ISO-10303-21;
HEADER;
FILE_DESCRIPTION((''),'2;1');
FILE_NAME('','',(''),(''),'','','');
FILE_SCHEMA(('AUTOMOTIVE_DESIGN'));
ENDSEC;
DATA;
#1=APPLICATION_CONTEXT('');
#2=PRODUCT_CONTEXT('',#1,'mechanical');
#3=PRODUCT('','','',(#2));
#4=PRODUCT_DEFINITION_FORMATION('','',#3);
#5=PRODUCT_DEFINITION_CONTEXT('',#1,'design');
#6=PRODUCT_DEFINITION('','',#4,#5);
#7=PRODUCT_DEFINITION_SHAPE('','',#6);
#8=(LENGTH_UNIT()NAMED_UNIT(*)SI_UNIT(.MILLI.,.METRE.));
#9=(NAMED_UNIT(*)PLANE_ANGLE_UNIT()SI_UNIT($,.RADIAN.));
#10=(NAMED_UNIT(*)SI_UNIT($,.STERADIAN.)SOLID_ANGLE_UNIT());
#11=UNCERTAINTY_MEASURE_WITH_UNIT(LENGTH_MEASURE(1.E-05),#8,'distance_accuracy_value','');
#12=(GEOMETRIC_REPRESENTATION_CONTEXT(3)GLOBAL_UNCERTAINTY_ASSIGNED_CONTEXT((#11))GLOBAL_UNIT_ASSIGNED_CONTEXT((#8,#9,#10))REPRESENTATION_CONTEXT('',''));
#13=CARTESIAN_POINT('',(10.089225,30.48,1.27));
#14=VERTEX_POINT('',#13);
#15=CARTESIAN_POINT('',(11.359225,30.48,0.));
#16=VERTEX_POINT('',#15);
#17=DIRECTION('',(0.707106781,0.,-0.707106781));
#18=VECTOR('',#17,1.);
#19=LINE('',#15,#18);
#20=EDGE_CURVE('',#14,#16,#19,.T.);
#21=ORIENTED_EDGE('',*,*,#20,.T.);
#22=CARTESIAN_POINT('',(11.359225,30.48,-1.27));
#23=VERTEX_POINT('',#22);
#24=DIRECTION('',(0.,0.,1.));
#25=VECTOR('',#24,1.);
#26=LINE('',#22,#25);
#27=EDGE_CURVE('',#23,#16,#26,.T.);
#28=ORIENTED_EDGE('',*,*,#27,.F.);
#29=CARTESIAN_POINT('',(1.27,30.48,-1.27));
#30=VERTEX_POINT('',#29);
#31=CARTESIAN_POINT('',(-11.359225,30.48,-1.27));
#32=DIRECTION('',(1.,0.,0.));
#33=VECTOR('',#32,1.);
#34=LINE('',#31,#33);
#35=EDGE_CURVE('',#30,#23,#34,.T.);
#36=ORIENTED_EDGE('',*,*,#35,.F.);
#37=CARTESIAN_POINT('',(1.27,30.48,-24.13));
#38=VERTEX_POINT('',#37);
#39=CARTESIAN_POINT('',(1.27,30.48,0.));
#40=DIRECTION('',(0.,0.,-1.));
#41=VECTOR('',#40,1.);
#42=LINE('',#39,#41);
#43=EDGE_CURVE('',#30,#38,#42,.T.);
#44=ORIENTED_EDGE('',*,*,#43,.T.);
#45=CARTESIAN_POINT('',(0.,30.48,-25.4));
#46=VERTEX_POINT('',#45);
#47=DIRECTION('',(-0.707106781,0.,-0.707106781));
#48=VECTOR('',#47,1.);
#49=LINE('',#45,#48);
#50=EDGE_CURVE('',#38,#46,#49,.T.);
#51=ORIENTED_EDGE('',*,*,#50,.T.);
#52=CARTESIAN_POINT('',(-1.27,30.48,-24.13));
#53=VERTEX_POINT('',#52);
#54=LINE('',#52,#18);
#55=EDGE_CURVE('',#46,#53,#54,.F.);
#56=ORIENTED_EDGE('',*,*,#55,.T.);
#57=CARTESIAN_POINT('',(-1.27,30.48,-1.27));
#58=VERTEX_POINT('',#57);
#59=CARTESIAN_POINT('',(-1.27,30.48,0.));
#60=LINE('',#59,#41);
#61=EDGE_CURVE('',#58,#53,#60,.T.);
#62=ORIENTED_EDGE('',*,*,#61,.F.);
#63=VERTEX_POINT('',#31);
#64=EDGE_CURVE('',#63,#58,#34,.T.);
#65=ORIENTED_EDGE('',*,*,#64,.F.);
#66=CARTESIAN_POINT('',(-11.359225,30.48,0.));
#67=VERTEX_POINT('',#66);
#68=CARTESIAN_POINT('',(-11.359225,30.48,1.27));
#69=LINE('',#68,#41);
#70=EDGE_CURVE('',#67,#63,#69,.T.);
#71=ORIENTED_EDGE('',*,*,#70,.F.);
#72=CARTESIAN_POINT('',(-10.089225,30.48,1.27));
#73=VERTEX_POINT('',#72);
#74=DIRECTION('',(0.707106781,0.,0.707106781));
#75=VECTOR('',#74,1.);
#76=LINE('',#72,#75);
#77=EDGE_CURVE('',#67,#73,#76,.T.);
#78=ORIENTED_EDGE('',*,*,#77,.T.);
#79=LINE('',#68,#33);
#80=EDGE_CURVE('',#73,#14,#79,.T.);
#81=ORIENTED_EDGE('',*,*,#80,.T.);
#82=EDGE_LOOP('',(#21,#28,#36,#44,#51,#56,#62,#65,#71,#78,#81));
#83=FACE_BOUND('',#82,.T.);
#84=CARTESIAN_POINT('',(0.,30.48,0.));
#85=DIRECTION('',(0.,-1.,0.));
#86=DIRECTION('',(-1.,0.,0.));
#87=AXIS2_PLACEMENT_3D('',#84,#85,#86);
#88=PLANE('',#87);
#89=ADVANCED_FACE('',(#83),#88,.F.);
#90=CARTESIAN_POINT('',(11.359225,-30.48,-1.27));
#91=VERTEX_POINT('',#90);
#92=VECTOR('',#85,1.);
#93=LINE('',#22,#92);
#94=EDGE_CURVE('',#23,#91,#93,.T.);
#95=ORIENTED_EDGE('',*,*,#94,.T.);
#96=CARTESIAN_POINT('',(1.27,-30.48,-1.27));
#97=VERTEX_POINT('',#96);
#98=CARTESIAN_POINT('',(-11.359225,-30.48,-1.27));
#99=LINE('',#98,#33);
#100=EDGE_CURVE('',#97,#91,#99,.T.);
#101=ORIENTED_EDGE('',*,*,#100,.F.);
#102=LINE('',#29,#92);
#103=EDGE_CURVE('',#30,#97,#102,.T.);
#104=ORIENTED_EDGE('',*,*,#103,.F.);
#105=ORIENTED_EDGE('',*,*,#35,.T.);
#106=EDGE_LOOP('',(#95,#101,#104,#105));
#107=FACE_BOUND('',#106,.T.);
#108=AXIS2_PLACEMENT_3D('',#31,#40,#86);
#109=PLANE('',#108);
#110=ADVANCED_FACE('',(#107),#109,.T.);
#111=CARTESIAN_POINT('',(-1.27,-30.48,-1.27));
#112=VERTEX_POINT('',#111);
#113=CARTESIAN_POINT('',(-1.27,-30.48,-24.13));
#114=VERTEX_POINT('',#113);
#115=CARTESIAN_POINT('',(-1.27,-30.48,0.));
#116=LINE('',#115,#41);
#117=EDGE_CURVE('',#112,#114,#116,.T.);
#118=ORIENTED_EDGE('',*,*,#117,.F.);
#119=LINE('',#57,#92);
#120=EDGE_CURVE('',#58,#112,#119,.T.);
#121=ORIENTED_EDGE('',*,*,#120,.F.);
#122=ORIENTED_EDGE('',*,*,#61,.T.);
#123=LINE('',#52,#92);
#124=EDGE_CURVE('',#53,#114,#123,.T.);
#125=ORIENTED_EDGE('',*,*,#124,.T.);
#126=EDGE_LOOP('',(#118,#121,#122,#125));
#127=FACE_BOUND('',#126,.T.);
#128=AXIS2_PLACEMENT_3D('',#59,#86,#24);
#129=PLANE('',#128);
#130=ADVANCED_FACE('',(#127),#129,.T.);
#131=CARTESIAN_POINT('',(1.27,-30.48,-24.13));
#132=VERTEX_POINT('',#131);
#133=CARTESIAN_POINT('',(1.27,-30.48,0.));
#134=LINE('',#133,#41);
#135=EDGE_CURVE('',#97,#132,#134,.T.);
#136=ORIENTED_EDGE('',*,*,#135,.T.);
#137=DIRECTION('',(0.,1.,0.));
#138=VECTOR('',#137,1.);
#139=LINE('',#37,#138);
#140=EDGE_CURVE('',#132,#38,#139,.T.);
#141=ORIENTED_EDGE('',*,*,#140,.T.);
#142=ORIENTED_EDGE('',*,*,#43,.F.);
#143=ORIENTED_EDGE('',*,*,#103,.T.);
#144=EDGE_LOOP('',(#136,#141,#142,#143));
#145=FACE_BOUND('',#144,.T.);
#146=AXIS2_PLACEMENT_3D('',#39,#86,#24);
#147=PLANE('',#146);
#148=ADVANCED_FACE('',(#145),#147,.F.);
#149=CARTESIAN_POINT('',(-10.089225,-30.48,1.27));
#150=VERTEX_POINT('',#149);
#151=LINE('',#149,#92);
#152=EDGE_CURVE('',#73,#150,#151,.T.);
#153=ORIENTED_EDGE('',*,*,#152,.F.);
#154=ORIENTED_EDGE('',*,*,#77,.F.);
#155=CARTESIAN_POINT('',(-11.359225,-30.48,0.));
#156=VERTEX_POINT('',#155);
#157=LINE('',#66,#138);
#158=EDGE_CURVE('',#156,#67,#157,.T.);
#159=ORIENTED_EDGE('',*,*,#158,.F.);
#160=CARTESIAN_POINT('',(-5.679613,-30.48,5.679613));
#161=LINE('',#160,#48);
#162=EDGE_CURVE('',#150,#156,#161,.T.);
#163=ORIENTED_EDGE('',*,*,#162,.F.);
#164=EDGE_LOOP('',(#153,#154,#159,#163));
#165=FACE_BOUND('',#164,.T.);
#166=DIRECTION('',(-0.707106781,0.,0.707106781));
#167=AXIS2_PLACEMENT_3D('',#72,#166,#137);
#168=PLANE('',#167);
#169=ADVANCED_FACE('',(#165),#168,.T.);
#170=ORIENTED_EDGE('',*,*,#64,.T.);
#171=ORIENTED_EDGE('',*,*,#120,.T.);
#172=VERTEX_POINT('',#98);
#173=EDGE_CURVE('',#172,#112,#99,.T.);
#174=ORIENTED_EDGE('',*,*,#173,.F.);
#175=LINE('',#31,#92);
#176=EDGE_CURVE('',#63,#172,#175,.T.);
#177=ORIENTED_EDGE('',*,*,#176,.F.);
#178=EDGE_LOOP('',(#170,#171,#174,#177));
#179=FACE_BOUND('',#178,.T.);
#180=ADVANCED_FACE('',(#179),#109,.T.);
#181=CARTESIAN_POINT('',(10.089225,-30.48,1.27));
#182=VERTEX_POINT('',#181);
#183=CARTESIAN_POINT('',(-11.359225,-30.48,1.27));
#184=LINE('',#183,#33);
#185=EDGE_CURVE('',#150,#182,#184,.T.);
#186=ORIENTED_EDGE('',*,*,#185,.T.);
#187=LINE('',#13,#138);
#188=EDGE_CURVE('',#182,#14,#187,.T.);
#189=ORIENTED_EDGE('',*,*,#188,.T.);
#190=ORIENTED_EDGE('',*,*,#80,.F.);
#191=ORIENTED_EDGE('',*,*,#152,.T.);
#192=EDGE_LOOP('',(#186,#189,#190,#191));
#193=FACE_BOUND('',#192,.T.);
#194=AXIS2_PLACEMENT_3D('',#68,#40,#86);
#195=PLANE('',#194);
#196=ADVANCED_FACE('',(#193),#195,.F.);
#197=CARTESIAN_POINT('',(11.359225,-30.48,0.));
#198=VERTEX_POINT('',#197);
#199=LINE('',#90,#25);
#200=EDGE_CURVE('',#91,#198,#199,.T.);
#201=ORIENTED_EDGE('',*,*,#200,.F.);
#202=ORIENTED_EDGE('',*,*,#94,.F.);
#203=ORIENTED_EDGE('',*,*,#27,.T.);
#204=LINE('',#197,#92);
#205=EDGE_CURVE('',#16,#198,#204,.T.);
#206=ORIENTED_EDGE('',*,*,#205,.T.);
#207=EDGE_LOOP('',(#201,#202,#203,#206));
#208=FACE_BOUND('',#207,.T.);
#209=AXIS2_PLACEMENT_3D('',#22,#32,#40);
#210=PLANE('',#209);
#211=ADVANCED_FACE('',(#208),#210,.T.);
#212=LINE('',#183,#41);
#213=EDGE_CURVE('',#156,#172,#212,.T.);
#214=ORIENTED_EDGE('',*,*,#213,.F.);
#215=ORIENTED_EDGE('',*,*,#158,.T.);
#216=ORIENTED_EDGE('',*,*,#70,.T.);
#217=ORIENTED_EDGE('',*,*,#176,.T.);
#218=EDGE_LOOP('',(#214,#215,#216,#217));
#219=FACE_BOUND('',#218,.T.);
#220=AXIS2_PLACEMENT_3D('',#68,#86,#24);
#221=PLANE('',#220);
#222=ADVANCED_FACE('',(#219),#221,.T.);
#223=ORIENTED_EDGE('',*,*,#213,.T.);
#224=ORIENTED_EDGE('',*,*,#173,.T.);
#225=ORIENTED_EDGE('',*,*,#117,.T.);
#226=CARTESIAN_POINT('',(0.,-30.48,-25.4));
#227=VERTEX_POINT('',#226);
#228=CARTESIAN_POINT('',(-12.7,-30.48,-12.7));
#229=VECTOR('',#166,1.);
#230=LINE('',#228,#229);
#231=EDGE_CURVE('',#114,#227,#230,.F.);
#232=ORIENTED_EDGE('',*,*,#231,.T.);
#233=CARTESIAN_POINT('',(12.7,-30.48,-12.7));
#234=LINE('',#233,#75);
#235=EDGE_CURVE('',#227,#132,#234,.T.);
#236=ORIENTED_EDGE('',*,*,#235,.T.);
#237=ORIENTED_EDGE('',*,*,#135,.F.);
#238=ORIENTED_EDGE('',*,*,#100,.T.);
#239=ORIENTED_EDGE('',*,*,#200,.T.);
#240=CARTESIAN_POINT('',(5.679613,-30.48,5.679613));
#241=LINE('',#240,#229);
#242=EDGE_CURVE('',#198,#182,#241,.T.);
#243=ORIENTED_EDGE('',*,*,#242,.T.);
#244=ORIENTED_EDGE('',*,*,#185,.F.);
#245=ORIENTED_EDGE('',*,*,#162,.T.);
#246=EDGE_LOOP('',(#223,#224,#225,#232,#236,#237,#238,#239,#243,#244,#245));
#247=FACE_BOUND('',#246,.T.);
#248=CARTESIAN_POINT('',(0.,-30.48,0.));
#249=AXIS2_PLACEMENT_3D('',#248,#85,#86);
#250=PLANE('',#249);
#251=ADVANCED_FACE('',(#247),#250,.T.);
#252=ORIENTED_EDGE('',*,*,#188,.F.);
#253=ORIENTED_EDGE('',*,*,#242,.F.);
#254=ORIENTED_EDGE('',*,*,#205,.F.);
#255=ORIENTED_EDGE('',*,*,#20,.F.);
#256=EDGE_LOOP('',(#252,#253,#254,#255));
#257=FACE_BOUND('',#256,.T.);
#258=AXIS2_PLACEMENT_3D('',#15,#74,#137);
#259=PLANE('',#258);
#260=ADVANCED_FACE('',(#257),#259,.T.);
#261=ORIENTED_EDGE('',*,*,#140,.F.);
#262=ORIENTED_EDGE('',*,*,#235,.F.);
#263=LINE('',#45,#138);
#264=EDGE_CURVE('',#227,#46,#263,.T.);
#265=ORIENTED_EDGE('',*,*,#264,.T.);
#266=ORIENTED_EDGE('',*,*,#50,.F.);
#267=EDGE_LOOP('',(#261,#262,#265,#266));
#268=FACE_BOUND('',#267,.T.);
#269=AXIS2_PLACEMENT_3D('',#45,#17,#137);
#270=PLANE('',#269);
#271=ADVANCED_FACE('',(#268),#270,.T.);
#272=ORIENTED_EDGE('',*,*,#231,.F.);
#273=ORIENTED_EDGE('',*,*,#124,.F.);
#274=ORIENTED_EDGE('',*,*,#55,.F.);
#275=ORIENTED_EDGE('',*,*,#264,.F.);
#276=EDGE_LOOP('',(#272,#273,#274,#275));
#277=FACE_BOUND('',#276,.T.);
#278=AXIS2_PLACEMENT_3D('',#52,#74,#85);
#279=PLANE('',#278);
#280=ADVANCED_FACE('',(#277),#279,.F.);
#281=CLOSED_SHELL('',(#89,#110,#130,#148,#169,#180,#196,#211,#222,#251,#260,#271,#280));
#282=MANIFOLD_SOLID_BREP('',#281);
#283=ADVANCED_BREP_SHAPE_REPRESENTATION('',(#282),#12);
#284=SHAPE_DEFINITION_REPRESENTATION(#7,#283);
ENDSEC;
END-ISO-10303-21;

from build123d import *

# Parameters (mm, degrees)
SKETCH2_W             = 22.718450652
SKETCH2_H             = 2.54
EXTRUDE_THIN1_DEPTH   = 30.48
SKETCH2_W_2           = 2.54
SKETCH2_H_2           = 25.4
EXTRUDE_THIN1_2_DEPTH = 30.48
CHAMFER1_SIZE         = 1.27


with BuildPart() as part:
    # Sketch2 → Extrude-Thin1 (new, symmetric)
    with BuildSketch(Plane(origin=(0, 0, 0), x_dir=(1, 0, 0), z_dir=(0, 1, 0))):
        Rectangle(SKETCH2_W, SKETCH2_H)
    extrude(amount=EXTRUDE_THIN1_DEPTH, both=True)


with BuildPart() as body_2:
    # Sketch2 → Extrude-Thin1 2 (new, symmetric)
    with BuildSketch(Plane(origin=(0, 0, 0), x_dir=(1, 0, 0), z_dir=(0, 1, 0))):
        with Locations((0, 12.7)):
            Rectangle(SKETCH2_W_2, SKETCH2_H_2)
    extrude(amount=EXTRUDE_THIN1_2_DEPTH, both=True)

    # Combine1: union part
    add(part.part)

    # Chamfer1
    chamfer1_edges = [body_2.edges().sort_by_distance(p)[0] for p in [
        (-11.359225326, 0, 1.27),
        (11.359225326, 0, 1.27),
        (1.27, 0, -25.4),
        (-1.27, 0, -25.4),
    ]]
    chamfer(chamfer1_edges, length=CHAMFER1_SIZE - 0.0001)  # a hair under: the kernel refuses the full size


solid = body_2.part
